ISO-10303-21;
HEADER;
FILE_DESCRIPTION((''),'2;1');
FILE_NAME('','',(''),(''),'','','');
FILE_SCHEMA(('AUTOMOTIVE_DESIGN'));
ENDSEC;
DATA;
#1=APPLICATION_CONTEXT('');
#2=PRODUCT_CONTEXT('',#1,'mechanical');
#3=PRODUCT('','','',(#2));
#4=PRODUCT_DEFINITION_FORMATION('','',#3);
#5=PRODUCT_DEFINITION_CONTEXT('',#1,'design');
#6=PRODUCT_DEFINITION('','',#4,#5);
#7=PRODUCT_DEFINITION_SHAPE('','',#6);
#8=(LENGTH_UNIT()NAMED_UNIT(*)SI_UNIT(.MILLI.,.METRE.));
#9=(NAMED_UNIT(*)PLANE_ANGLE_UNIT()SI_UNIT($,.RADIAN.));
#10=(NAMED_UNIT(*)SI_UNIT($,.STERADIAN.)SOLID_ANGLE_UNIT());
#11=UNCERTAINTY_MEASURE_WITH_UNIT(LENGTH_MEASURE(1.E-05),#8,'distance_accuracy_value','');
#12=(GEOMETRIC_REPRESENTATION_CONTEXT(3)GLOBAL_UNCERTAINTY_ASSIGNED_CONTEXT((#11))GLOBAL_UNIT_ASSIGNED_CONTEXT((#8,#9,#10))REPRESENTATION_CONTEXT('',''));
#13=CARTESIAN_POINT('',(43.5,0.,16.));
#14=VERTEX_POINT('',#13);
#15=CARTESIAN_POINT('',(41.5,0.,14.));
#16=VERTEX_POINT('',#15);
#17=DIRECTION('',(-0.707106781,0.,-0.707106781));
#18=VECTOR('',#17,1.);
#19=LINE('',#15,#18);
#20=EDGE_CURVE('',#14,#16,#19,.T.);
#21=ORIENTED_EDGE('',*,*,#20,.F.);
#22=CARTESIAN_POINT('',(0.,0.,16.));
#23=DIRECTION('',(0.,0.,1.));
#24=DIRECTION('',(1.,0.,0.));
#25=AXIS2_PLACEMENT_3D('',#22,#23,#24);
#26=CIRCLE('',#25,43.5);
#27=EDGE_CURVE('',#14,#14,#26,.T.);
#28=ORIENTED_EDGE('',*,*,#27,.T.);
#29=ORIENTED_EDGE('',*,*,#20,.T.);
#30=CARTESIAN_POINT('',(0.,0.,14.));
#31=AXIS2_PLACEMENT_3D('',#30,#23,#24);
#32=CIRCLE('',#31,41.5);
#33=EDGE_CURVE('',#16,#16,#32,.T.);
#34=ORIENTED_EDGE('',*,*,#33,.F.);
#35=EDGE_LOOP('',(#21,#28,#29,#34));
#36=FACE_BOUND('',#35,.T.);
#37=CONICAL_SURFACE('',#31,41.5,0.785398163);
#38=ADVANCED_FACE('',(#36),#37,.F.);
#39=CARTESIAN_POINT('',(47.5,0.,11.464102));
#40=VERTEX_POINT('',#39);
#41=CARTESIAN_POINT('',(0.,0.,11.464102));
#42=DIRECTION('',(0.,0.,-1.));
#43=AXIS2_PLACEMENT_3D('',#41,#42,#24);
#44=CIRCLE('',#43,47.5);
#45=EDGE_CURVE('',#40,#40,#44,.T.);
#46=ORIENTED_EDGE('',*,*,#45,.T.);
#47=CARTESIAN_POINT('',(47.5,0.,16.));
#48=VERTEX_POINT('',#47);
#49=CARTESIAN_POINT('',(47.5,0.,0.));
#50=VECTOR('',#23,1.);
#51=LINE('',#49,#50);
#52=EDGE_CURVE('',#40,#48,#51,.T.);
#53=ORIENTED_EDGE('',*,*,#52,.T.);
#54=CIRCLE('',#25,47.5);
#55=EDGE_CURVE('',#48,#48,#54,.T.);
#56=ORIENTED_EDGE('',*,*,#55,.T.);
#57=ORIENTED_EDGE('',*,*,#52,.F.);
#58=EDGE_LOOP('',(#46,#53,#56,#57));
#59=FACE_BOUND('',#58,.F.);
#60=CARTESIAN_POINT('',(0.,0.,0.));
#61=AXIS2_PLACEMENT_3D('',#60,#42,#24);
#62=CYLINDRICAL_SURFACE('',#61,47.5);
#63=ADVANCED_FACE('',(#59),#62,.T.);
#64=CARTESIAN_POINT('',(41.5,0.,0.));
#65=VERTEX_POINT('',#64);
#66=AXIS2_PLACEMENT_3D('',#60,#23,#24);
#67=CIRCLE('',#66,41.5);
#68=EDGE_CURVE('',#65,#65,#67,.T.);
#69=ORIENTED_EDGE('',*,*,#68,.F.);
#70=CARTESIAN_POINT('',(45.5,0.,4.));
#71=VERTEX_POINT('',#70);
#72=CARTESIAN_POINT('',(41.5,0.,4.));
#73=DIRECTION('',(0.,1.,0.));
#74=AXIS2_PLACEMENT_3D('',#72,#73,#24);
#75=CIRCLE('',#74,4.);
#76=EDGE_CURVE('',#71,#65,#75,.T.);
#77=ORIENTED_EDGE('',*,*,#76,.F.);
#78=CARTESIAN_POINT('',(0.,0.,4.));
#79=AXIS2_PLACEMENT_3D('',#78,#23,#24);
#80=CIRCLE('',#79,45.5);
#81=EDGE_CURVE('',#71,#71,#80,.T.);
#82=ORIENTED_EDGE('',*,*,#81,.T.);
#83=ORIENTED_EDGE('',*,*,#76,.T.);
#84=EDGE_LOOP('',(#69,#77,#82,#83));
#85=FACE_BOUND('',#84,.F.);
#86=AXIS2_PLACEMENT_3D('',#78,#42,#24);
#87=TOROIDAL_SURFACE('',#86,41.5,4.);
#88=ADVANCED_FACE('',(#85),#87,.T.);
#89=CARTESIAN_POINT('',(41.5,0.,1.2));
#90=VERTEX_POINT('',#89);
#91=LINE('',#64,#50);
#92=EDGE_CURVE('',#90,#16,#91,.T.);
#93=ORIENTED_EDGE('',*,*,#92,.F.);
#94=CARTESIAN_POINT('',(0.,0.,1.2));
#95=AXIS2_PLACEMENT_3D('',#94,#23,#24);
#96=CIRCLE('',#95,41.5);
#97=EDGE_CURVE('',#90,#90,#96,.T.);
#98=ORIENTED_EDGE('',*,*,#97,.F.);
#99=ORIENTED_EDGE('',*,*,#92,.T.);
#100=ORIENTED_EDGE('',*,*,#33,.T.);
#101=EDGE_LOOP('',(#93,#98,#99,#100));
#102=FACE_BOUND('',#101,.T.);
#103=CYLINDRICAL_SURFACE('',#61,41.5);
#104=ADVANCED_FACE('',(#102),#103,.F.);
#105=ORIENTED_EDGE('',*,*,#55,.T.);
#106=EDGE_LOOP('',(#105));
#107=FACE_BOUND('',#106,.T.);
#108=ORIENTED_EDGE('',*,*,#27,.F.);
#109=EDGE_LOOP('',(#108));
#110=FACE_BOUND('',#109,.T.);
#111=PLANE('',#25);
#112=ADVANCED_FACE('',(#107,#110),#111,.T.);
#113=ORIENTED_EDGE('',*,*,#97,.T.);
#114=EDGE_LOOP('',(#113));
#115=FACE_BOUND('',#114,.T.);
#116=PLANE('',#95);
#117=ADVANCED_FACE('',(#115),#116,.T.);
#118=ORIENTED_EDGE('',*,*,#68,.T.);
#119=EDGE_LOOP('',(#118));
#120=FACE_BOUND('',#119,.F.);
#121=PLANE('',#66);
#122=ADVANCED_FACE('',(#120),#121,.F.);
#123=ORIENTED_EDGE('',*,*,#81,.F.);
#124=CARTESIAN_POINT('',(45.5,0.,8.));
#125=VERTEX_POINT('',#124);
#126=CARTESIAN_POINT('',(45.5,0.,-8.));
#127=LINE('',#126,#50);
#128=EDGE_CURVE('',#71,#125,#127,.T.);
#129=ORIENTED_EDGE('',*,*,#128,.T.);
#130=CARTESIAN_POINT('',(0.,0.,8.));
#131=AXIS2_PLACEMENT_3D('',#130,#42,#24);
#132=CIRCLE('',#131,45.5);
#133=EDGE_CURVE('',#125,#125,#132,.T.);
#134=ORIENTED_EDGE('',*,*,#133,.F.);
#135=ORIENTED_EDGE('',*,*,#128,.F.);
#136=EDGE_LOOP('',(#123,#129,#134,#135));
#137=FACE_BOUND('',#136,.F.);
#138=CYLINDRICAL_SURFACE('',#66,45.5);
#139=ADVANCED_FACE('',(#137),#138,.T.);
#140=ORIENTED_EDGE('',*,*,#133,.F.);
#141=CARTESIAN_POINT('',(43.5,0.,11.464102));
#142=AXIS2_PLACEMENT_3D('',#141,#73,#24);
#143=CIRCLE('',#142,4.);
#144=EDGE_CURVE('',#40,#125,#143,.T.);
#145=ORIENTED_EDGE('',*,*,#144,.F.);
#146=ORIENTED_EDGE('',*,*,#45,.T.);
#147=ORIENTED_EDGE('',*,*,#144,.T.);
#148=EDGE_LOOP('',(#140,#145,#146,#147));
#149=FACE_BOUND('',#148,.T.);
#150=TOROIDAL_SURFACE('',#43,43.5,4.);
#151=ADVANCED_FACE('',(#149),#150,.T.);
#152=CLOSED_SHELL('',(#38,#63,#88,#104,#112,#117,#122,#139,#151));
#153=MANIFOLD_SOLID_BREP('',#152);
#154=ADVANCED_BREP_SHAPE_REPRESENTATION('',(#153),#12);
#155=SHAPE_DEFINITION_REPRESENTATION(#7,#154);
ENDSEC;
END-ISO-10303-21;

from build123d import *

# Parameters (mm, degrees)
F0_R     = 47.5
F0_R_2   = 41.5
F1_DEPTH = 16
F2_DEPTH = 1.2
F3_SIZE  = 2
F4_R     = 48.436615
F4_R_2   = 47.5
F4_R_3   = 45.5
F5_DEPTH = 8


# Not quite as in the source:
# - a fillet or chamfer that OpenCascade refuses, or shapes differently, is made with other operations: its cross-section is extruded or revolved along the edge and cut away or added


with BuildPart() as f1:
    # F0 (on Top) → F1 (new body)
    with BuildSketch(Plane.XY):
        Circle(F0_R)
        Circle(F0_R_2, mode=Mode.SUBTRACT)
    extrude(amount=F1_DEPTH)

    # F0 (on Top) → F2 (join)
    with BuildSketch(Plane.XY):
        Circle(F0_R_2)
    extrude(amount=F2_DEPTH)

    # F3
    f3_edges = [f1.edges().sort_by_distance(p)[0] for p in [
        (-41.5, 0, 16),
    ]]
    chamfer(f3_edges, length=F3_SIZE)

    # F4 (on face) → F5 (cut, symmetric)
    with BuildSketch(Plane(origin=(0, 0, 0), x_dir=(1, 0, 0), z_dir=(0, 0, -1))):
        Circle(F4_R)
        Circle(F4_R_2, mode=Mode.SUBTRACT)
        Circle(F4_R_2)
        Circle(F4_R_3, mode=Mode.SUBTRACT)
    extrude(amount=F5_DEPTH, both=True, mode=Mode.SUBTRACT)

    # F6: fillet of radius 4 on 2 edges, made by hand

    # F6_s1 → F6_t2 (revolve, cut)
    with BuildSketch(Plane.XZ):
        with BuildLine():
            ThreePointArc((47.5, 11.4641016151), (46.9641016151, 9.4641016151), (45.5, 8))
            Line((45.5, 8), (47.5, 8))
            Line((47.5, 8), (47.5, 11.4641016151))
        make_face()
    revolve(axis=Axis((0, 0, 8), (0, 0, -1)), mode=Mode.SUBTRACT)

    # F6_s3 → F6_t4 (revolve, cut)
    with BuildSketch(Plane.XZ):
        with BuildLine():
            ThreePointArc((45.5, 4), (44.3284271247, 1.1715728753), (41.5, 0))
            Line((41.5, 0), (45.5, 0))
            Line((45.5, 0), (45.5, 4))
        make_face()
    revolve(axis=Axis((0, 0, 0), (0, 0, 1)), mode=Mode.SUBTRACT)


solid = f1.part
